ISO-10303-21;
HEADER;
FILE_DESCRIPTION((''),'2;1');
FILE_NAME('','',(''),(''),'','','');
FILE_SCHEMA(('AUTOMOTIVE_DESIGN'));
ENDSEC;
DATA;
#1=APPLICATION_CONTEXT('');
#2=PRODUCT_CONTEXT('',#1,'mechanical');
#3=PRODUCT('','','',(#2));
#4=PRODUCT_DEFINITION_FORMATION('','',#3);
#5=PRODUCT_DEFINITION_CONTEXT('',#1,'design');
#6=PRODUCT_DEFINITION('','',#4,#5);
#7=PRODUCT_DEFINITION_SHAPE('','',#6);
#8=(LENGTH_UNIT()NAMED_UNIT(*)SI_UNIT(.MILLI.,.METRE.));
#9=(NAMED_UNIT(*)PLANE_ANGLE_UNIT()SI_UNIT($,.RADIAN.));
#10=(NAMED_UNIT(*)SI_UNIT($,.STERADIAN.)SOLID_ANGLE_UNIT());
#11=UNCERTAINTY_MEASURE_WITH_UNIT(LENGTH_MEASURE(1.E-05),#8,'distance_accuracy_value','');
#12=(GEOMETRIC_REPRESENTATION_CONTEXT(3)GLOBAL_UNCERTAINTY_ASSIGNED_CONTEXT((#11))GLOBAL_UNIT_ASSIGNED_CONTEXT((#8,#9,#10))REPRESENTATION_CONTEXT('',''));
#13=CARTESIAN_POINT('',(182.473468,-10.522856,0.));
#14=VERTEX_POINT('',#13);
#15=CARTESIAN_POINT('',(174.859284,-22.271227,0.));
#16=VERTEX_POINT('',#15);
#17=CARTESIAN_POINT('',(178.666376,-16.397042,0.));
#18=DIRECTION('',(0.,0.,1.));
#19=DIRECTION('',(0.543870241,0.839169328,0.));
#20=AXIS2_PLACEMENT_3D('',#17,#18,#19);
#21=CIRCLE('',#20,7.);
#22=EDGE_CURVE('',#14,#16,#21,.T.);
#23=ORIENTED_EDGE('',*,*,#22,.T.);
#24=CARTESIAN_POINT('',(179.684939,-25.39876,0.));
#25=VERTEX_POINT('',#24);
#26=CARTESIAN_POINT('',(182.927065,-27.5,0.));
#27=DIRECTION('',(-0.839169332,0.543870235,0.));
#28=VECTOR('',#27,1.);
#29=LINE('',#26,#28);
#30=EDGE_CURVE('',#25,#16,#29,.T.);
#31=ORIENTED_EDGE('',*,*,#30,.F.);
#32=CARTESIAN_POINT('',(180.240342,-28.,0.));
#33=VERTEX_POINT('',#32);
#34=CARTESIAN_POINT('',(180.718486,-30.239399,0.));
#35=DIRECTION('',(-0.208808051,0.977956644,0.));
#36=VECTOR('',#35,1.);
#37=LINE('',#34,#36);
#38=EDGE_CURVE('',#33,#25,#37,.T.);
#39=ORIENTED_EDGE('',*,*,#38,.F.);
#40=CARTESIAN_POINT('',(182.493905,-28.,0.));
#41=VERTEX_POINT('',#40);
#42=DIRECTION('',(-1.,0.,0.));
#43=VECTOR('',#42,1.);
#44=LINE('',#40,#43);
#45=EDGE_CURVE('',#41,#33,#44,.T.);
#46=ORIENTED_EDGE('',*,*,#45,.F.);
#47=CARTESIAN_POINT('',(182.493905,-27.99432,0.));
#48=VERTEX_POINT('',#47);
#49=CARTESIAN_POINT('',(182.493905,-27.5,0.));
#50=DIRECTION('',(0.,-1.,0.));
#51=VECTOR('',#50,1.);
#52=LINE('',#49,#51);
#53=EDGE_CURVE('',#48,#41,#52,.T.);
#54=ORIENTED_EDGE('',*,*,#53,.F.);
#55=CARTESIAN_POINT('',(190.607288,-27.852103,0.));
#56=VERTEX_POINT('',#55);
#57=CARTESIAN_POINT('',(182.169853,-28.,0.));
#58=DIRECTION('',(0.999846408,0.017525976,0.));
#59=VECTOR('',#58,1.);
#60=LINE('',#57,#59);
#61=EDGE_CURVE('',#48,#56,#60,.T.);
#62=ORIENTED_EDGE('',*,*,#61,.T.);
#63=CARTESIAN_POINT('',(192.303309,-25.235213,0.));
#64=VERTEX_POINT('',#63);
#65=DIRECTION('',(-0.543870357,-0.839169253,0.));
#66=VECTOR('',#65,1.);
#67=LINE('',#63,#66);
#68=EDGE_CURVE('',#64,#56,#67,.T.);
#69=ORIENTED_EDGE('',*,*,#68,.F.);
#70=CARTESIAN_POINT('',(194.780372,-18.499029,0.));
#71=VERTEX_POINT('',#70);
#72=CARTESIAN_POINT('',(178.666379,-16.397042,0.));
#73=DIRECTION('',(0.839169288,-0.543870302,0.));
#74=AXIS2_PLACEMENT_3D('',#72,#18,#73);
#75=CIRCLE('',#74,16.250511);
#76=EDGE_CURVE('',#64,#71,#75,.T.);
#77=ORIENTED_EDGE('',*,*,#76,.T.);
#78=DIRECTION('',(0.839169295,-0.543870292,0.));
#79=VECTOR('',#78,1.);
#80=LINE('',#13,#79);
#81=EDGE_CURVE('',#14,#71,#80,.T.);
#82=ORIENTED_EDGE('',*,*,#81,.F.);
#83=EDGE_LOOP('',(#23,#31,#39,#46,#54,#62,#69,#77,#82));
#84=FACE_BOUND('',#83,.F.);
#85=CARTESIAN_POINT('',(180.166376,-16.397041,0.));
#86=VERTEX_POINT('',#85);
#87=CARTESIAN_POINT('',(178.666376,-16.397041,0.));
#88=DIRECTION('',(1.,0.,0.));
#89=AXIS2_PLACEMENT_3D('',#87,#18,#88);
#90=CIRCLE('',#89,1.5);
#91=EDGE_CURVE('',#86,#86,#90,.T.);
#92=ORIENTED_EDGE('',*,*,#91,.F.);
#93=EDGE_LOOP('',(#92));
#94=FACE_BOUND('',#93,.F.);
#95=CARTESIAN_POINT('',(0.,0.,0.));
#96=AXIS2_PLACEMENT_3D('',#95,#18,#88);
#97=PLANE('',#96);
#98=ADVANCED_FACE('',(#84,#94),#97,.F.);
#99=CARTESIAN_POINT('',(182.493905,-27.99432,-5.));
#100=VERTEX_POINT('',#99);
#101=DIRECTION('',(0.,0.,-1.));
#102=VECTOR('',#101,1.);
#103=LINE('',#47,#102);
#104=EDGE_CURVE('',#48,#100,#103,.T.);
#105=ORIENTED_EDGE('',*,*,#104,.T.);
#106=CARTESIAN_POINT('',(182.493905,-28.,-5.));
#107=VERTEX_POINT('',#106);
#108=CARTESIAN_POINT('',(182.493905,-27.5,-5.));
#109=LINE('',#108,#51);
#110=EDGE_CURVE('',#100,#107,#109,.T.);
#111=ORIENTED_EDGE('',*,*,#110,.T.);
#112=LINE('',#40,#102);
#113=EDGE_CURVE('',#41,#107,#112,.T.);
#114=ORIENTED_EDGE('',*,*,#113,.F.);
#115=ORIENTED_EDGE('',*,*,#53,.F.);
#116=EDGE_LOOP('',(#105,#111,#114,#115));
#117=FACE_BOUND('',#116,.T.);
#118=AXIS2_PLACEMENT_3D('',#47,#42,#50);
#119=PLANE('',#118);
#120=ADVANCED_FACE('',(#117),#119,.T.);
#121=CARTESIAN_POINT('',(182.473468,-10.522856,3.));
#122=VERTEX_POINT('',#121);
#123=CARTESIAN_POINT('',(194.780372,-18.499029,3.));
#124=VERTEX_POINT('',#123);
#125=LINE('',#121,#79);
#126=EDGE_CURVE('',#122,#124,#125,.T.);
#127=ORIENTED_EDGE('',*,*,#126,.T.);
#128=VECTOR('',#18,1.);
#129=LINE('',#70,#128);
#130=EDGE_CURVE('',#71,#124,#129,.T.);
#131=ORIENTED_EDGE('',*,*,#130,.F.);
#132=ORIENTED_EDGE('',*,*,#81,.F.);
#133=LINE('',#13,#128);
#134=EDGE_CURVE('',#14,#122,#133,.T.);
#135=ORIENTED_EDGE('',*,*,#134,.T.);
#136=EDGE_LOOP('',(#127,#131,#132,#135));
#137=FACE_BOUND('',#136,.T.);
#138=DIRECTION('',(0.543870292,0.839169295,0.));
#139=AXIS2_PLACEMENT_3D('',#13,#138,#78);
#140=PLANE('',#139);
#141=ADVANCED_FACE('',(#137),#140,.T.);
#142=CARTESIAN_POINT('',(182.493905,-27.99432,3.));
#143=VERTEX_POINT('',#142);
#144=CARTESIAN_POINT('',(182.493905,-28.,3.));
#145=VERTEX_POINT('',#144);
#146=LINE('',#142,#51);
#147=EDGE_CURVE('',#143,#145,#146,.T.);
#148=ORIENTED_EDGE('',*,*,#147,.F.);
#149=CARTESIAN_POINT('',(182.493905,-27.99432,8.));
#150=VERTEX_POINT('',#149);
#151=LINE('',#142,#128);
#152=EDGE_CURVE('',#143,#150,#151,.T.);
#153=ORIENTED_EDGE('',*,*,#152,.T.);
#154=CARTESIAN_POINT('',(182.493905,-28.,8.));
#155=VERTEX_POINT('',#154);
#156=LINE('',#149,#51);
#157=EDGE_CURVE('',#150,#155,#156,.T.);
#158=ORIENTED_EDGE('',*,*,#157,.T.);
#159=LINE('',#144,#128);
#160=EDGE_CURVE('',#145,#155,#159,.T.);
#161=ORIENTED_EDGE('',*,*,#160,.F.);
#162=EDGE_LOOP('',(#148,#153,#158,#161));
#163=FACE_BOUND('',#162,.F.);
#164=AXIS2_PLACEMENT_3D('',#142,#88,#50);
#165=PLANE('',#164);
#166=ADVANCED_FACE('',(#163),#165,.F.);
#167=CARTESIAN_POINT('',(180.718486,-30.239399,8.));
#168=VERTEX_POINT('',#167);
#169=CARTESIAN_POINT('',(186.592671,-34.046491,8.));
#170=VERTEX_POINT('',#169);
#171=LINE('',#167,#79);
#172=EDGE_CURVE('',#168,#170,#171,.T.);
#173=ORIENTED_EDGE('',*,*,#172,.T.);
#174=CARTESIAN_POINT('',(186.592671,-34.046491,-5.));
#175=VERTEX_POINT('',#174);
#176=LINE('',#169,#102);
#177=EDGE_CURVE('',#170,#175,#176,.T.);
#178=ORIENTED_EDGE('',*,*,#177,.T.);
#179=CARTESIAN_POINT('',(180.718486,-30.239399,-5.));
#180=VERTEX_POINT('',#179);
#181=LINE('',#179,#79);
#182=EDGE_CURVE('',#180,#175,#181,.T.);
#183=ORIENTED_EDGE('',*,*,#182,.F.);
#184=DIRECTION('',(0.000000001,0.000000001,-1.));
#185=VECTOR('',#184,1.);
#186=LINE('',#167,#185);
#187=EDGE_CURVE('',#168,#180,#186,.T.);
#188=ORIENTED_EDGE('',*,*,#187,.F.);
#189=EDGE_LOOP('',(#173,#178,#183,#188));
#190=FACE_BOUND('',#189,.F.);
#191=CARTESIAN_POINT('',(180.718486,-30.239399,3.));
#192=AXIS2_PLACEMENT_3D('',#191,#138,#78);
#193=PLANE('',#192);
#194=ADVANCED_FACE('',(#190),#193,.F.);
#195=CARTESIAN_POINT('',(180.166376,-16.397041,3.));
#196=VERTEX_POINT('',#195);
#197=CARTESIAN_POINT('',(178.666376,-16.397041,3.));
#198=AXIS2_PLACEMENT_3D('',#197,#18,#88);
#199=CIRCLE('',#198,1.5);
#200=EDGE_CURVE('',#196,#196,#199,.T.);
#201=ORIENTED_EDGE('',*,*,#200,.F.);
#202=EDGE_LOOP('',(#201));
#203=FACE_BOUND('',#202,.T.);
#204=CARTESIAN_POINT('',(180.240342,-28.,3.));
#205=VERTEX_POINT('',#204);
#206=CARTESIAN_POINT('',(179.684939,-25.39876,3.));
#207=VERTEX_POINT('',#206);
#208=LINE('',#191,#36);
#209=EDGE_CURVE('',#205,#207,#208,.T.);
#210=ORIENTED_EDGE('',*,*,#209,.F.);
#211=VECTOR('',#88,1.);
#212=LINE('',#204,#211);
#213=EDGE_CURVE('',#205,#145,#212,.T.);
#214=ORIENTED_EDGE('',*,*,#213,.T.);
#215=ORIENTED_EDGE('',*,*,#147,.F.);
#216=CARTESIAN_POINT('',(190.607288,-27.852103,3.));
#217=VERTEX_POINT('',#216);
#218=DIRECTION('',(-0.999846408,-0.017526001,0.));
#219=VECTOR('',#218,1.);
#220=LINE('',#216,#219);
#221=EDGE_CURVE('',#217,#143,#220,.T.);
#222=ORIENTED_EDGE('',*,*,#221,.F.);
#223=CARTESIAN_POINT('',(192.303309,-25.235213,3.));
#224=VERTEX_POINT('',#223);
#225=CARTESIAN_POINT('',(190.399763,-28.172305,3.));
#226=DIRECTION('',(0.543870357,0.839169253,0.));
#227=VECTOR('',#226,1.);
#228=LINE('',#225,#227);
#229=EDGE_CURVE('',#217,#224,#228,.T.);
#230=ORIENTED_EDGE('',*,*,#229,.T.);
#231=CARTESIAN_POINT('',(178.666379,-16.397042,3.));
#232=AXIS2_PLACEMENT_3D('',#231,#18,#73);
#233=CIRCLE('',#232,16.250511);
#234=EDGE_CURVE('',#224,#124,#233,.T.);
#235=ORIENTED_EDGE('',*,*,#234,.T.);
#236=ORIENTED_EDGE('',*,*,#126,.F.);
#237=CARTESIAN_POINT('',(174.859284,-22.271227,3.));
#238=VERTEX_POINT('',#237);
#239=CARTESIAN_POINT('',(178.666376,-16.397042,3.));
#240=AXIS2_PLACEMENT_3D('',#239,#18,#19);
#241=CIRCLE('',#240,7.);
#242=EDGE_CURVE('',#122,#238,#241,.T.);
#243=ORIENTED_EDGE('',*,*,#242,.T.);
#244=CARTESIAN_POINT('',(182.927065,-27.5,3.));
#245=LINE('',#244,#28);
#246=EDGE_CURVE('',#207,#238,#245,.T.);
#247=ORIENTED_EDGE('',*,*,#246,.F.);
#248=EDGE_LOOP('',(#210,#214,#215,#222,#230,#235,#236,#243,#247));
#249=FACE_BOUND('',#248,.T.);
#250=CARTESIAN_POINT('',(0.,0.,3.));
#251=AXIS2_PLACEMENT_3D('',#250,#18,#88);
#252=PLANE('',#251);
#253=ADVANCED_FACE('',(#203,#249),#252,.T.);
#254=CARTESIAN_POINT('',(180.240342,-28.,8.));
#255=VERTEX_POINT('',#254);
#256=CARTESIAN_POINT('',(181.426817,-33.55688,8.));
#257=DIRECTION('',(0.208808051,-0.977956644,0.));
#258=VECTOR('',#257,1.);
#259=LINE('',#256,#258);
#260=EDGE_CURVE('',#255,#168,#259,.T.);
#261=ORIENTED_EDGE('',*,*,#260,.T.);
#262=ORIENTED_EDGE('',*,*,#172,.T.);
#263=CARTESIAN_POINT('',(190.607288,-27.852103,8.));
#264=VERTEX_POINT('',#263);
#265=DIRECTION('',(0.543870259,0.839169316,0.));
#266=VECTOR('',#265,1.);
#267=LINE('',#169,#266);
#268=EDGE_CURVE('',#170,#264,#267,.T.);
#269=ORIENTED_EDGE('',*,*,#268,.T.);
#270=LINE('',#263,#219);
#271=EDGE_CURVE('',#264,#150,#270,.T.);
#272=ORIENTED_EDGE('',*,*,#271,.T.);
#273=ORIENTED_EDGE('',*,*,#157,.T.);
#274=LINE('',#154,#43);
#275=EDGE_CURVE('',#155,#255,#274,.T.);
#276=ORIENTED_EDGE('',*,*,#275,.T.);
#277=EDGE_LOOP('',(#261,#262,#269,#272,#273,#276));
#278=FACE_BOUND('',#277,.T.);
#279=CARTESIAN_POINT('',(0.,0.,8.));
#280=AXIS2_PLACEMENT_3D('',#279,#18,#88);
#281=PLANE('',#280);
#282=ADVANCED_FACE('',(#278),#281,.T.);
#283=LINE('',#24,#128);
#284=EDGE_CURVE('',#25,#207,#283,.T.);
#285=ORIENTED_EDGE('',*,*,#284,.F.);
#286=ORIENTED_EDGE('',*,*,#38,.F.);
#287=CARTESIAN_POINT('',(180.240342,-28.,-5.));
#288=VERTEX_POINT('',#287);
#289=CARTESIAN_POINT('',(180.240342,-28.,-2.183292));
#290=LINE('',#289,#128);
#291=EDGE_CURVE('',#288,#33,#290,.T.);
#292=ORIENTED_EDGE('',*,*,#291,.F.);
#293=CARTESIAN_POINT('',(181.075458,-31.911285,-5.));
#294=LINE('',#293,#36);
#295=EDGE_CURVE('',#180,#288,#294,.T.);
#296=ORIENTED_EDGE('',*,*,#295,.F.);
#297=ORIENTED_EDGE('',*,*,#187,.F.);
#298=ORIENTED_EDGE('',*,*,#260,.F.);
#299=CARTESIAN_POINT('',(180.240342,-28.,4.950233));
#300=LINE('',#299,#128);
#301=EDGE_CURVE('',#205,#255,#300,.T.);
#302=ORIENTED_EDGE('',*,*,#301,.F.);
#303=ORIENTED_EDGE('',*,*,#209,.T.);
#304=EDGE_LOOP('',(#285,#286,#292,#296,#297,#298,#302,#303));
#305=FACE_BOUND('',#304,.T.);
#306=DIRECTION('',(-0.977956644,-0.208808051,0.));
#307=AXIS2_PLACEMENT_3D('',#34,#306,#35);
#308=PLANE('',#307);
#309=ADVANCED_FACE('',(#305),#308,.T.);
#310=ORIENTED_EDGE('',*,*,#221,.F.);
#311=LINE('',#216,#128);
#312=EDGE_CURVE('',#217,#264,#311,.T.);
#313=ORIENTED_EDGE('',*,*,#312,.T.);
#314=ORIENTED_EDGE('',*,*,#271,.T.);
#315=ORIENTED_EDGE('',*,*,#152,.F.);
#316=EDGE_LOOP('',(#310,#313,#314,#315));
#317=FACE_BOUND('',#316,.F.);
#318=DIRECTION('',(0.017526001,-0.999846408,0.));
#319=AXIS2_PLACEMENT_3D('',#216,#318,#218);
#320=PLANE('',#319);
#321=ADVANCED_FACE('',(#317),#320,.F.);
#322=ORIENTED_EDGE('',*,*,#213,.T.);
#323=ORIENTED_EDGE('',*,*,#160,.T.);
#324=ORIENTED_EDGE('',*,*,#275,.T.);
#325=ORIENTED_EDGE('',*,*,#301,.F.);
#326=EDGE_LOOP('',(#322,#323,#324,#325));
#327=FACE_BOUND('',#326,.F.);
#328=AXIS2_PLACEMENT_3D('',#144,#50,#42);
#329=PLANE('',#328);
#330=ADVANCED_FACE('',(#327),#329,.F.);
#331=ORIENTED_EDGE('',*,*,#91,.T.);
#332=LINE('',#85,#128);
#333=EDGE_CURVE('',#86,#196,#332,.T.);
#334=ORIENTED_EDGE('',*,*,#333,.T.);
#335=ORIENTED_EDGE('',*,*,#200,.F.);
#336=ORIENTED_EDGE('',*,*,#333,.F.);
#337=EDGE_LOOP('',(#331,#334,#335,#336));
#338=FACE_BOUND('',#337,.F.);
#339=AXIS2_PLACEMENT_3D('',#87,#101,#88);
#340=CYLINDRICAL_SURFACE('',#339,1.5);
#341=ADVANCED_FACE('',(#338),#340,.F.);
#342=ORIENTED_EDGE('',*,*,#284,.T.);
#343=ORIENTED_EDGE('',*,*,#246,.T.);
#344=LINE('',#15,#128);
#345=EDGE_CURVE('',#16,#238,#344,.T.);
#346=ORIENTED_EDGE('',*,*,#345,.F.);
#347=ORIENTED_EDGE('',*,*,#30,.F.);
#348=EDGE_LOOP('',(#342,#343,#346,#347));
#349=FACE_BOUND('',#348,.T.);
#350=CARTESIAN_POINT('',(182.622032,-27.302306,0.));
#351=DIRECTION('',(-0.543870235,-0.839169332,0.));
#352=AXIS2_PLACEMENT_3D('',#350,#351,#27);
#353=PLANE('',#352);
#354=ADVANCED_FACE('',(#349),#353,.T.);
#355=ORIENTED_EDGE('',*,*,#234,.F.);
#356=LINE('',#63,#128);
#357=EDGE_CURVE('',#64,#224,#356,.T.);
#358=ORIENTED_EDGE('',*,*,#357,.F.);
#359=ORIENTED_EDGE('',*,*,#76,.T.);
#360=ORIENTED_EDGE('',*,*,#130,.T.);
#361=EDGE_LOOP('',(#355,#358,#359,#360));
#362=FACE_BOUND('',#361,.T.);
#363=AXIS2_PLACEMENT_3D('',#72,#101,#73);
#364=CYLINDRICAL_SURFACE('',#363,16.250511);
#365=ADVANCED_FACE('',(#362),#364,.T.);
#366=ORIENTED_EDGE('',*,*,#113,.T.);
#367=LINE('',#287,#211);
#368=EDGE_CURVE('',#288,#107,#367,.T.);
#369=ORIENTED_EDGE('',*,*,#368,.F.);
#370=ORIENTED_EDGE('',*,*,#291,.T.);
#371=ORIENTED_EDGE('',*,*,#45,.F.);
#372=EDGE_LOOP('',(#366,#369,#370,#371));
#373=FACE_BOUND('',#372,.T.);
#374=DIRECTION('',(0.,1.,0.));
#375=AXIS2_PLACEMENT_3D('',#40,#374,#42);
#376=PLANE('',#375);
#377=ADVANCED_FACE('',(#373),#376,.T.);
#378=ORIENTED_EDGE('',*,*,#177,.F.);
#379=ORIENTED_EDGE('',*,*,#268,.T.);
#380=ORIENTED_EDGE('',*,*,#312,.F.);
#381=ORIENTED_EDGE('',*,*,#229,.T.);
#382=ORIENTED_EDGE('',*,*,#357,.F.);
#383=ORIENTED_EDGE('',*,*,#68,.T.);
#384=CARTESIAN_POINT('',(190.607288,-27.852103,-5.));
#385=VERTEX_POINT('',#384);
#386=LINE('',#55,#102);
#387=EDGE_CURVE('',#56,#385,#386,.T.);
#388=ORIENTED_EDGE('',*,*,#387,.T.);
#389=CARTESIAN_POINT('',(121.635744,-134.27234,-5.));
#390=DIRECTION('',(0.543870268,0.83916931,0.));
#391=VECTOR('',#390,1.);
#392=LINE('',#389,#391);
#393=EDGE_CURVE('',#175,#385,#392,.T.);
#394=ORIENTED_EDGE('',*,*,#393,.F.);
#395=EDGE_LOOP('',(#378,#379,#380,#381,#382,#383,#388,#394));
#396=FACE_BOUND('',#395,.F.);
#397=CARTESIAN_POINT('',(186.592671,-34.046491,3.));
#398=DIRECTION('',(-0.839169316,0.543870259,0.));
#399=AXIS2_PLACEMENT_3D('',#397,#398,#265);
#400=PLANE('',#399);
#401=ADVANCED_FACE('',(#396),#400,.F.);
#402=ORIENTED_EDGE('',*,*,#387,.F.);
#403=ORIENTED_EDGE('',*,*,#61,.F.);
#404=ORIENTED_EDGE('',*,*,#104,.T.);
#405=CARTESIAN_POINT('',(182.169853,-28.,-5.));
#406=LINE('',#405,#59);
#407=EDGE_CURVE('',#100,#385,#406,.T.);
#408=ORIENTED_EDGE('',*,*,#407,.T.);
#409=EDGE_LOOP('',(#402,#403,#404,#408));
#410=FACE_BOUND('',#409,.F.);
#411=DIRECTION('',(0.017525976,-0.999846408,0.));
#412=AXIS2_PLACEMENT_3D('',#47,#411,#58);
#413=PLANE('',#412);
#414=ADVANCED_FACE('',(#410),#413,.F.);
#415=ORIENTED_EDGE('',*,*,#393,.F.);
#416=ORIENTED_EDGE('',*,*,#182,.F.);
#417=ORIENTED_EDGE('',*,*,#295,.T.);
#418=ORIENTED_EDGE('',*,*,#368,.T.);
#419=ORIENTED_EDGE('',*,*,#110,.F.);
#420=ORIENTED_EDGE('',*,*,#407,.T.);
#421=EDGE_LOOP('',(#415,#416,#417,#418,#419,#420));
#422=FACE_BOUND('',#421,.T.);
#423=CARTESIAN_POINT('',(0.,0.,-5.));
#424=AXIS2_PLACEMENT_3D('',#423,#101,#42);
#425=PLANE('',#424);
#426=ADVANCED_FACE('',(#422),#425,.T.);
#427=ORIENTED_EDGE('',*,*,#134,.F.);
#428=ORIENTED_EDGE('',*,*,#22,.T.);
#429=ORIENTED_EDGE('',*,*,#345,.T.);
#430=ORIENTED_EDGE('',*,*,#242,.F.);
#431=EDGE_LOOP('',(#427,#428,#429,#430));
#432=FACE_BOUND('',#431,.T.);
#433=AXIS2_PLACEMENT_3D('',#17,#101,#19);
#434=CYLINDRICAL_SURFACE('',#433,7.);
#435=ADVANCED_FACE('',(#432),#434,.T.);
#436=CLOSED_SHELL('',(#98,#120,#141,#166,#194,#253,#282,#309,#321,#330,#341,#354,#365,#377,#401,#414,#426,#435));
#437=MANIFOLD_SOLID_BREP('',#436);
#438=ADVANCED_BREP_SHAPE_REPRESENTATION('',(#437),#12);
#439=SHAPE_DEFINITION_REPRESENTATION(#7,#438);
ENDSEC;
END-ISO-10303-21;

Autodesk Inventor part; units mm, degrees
ref_plane "YZ Plane" through (0, 0, 0) normal (1, 0, 0) x (0, 1, 0)
ref_plane "XZ Plane" through (0, 0, 0) normal (0, 1, 0) x (-1, 0, 0)
ref_plane "Work Plane1" through (0, 0, 0) normal (0, 0, 1) x (1, 0, 0)
sketch "Sketch1" plane through (0, 0, 0) normal (0, 0, 1) x (1, 0, 0)
  circle A0 centre (178.666376, -16.397041) radius 1.5
  line L0 (201.424818, -12.080439) -> (122.055329, -134.544275)
  line L1 (192.303309, -25.235213) -> (190.399763, -28.172305)
  arc A1 (180.569922, -13.459949) -> (176.76283, -19.334134) centre (178.666376, -16.397041) ccw
  line L2 (182.927065, -27.5) -> (174.859284, -22.271227)
  arc A2 (182.473468, -10.522856) -> (174.859284, -22.271227) centre (178.666376, -16.397041) ccw
  line L3 (226.007006, -27.5) -> (182.061376, -27.5)
  line L4 (203.888132, -20.231027) -> (184.377014, -7.585764)
  line L5 (182.473468, -10.522856) -> (194.780372, -18.499029)
  line L6 (180.718486, -30.239399) -> (187.012256, -34.318426)
  arc A3 (192.303309, -25.235213) -> (194.780372, -18.499029) centre (178.666376, -16.397041) ccw
  line L7 (182.622032, -27.302306) -> (180.718486, -30.239399)
  line L8 (192.303309, -25.235213) -> (186.592671, -34.046491)
  point P0 (0, 0)
  point P1 (182.493905, -27.5)
  dimension "d0" = 0.5
  dimension "d1" = 7
extrude "Extrusion1" add sketch "Sketch1" along normal blind 3 contours L3 L2 A2 L5 A3 L1 | L1 L8 L6 L7 L3 | L3 L7 L2
sketch "Sketch2" plane through (0, 0, 0) normal (0, 0, -1) x (-1, 0, 0)
  line L0 (-113.222122, -27.5) -> (-151.8, -27.5)
  line L1 (-182.622032, -27.302306) -> (-180.718486, -30.239399)
  line L2 (-180.718486, -30.239399) -> (-186.592671, -34.046491)
  line L3 (-121.635744, -134.27234) -> (-201.005233, -11.808504)
  line L4 (-182.493905, -27.5) -> (-182.493905, -28)
  line L5 (-182.493905, -28) -> (-182.265706, -27.852103)
  line L6 (-182.622032, -27.302306) -> (-180.718486, -30.239399)
  line L7 (-182.493905, -28) -> (-182.169853, -28)
  line L8 (-182.169853, -28) -> (-190.607288, -27.852103)
  point P0 (0, 0)
  point P1 (-182.493905, -27.99432)
  dimension "d10" = 0.5
ref_plane "Work Plane2" through (162.2, -27.5, -5) normal (0, 0, -1) x (0, 1, 0)
extrude "Extrusion2" add sketch "Sketch2" along normal up to surface (5 mm away) contours L4 L7 L1 L2 L3 L8
sketch "Sketch3" plane through (0, 0, 3) normal (0, 0, 1) x (1, 0, 0)
  line L0 (190.607288, -27.852103) -> (182.493905, -27.99432)
  line L1 (186.592671, -34.046491) -> (190.607288, -27.852103)
  line L2 (180.718486, -30.239399) -> (186.592671, -34.046491)
  line L3 (182.169853, -28) -> (180.718486, -30.239399)
  line L4 (182.493905, -28) -> (182.169853, -28)
  line L5 (182.493905, -27.99432) -> (182.493905, -28)
  point P0 (0, 0)
extrude "Extrusion3" add sketch "Sketch3" along normal blind 5
chamfer "Chamfer1" distance 3.5 angle 45 1 edges at (182.622, -27.3023, 1.5)
properties part number "Lock1_3DPrint"
